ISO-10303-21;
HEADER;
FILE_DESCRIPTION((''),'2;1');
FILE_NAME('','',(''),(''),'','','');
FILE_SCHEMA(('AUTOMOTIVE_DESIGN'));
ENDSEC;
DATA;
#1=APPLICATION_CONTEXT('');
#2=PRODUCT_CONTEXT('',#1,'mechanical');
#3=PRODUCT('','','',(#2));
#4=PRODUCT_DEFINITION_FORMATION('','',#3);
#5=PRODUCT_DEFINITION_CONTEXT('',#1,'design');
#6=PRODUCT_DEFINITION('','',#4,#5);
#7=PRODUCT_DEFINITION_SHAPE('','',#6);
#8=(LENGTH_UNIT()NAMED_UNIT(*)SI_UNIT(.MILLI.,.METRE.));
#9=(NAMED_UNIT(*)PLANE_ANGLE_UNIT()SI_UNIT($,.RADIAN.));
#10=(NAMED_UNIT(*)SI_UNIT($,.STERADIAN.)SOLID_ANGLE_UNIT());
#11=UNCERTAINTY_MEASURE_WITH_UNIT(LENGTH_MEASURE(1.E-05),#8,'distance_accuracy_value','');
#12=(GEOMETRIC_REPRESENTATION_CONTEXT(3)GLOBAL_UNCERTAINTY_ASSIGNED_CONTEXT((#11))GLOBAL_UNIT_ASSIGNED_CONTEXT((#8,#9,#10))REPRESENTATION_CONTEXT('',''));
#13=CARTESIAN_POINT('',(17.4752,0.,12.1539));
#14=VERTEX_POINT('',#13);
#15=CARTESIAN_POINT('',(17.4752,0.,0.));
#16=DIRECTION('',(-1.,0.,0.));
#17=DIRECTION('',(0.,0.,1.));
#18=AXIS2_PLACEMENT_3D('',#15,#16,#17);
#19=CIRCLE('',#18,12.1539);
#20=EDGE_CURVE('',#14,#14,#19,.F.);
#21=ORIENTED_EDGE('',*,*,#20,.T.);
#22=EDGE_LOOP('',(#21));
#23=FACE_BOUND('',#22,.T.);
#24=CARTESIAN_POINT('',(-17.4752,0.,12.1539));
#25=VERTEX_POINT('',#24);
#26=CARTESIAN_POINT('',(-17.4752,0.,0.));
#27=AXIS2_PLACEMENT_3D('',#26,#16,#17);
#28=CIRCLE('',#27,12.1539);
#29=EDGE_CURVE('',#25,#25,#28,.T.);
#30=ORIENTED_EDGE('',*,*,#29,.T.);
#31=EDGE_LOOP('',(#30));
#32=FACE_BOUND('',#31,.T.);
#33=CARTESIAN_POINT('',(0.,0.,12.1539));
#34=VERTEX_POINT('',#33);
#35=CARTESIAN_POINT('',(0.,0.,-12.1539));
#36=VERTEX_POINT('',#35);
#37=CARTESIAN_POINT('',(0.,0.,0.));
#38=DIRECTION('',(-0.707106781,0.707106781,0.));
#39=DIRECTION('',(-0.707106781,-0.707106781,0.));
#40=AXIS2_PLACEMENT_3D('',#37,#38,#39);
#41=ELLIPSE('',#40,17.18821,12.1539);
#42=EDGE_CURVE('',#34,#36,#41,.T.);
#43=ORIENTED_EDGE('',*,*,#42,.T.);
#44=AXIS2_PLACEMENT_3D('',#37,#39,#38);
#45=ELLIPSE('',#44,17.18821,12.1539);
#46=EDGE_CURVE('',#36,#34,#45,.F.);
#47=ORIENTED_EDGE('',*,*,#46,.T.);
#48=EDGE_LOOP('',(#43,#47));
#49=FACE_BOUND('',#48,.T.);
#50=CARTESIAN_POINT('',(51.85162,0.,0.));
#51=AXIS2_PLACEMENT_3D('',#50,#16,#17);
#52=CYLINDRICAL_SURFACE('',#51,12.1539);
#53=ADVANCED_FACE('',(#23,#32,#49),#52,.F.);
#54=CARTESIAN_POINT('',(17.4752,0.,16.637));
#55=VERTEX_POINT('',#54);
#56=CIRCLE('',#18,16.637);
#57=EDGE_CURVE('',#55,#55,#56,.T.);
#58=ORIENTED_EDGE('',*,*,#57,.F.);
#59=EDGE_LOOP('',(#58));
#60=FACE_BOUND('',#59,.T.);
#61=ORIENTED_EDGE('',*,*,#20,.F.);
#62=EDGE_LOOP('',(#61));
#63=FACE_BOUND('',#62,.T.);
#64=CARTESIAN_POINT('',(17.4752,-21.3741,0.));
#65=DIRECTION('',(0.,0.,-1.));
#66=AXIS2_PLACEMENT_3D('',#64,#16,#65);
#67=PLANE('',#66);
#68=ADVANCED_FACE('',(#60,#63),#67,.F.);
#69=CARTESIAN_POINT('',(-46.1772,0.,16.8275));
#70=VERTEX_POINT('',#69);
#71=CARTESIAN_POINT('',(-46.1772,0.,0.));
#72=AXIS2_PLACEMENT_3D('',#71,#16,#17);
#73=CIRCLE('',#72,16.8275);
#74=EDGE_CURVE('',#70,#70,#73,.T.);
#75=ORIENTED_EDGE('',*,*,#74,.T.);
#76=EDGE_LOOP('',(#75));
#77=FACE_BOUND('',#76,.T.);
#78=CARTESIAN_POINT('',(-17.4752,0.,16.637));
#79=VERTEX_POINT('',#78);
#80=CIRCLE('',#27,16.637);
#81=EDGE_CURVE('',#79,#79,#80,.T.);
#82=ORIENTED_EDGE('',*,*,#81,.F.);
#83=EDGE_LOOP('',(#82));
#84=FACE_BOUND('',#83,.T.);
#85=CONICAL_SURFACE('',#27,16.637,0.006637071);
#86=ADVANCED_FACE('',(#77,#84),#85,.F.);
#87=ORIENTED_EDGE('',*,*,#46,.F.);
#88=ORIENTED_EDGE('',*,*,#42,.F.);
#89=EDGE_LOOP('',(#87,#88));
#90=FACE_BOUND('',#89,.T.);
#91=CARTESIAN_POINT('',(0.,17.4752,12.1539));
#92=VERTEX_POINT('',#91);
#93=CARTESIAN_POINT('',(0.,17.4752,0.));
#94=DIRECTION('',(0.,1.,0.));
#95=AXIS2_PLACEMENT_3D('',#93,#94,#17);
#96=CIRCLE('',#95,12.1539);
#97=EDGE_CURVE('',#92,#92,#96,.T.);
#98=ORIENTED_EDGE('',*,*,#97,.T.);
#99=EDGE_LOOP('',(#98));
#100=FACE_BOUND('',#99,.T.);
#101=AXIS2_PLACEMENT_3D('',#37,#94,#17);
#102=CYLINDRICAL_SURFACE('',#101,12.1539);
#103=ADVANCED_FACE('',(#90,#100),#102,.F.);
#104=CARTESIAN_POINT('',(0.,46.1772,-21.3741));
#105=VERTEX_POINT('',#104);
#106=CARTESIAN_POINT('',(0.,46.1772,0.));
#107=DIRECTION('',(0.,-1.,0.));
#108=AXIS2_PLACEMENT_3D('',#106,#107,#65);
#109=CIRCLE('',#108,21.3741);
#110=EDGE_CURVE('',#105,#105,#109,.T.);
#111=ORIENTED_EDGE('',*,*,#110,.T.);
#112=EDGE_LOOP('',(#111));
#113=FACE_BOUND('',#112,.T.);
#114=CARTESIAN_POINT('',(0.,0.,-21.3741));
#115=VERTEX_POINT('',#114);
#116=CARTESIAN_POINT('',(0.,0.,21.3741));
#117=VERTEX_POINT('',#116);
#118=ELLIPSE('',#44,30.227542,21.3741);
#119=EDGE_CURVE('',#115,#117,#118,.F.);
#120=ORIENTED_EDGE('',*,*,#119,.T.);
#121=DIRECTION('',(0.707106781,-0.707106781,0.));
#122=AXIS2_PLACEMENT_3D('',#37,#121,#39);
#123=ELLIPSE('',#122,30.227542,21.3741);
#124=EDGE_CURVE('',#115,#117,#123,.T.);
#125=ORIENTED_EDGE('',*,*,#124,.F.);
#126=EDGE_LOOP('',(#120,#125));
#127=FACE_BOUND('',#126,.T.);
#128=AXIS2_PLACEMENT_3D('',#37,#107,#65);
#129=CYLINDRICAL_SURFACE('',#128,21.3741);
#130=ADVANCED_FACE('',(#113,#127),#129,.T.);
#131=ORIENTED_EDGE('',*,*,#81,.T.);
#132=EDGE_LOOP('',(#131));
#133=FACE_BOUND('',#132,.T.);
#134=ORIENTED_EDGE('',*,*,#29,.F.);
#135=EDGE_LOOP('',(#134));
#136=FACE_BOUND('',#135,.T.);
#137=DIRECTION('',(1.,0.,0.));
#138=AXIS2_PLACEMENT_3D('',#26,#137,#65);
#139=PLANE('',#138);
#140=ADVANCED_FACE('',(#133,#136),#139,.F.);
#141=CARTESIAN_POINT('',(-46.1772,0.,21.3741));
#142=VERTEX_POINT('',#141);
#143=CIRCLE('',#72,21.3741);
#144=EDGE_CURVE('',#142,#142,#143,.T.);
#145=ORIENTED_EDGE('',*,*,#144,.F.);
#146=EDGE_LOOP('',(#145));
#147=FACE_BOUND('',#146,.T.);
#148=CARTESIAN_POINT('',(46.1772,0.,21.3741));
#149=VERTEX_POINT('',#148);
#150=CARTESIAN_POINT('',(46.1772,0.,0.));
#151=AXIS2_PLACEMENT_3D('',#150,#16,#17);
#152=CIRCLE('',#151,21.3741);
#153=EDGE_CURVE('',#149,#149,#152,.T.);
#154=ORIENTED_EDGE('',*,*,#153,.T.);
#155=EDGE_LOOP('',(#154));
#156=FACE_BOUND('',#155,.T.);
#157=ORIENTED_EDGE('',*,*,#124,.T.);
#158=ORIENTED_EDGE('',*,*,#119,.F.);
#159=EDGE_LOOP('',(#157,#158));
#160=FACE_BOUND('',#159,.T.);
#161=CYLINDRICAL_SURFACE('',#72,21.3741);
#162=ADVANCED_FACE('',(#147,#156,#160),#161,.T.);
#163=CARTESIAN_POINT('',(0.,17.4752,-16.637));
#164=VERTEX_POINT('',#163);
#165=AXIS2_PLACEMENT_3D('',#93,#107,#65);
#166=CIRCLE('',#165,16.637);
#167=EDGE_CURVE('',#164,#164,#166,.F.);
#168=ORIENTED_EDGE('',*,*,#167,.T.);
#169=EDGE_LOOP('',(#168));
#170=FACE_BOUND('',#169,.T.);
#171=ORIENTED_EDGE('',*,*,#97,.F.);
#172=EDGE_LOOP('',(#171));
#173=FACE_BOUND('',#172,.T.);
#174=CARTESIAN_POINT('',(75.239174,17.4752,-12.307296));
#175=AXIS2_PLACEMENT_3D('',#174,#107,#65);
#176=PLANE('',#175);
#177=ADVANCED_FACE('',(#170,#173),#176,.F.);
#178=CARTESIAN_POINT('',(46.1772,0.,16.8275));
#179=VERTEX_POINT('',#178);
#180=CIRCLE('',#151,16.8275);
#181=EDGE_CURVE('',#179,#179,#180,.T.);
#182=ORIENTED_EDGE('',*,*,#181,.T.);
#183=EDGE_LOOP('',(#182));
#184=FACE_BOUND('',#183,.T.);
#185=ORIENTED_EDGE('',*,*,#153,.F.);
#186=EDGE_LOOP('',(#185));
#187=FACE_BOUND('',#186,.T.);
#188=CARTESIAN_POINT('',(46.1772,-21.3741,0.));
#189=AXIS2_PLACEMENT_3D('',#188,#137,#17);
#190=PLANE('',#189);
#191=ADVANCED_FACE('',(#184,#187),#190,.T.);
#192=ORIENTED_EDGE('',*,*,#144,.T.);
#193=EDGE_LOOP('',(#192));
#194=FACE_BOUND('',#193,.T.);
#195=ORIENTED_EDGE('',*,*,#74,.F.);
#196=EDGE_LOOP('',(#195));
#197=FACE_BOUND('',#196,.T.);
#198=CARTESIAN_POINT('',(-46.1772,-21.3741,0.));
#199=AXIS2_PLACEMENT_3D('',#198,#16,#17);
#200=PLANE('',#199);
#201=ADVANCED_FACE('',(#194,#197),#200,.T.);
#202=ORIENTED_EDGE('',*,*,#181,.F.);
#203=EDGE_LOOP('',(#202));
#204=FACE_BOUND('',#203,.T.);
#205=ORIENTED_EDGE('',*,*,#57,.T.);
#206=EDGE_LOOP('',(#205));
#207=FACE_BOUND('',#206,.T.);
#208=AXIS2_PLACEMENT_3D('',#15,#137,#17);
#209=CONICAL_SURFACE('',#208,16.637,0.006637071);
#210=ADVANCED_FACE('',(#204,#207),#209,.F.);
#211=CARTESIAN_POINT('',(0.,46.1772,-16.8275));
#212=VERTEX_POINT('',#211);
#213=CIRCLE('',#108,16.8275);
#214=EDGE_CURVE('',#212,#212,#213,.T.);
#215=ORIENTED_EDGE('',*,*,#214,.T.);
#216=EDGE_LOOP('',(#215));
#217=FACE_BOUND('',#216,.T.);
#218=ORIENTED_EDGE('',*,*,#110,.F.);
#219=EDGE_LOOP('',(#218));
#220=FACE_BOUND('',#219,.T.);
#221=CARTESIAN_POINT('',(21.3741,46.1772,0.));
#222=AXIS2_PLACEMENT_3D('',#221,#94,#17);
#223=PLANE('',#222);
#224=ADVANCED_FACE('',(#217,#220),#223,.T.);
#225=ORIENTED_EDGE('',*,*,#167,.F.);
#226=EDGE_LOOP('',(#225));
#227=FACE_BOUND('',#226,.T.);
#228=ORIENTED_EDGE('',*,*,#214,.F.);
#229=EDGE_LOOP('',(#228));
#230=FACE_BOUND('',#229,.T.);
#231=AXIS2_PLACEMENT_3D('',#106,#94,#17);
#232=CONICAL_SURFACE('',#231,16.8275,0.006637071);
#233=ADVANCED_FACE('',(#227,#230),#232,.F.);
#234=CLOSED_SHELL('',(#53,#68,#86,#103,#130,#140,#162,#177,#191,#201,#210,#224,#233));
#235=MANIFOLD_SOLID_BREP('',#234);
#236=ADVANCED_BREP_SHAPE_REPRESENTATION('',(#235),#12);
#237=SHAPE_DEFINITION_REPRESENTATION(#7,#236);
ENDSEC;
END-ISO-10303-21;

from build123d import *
from build123d.topology import SkipClean

# Parameters (mm, degrees)
BOSS_EXTRUDE1_START     = 34.9504
BOSS_EXTRUDE1_DEPTH     = 34.9504
BOSS_EXTRUDE2_DEPTH     = 17.4752001
SKETCH5_R               = 12.1539
CUT_EXTRUDE1_DEPTH      = 34.9504
CUT_EXTRUDE2_REACH      = 66.019
CUT_EXTRUDE2_END_RADIUS = 12.1539
SKETCH6_R               = 12.1539


# Read off the part's stored shape, not the designer's step: Boss-Extrude2
with BuildPart() as part:
    # Sketch1 → Revolve1 (revolve)
    with BuildSketch(Plane.XY, mode=Mode.PRIVATE) as revolve1_sk:
        Polygon((-46.1772, -21.3741), (-17.4752, -21.3741), (-17.4752, -16.637), (-46.1772, -16.8275), align=None)
    revolve(revolve1_sk.sketch.rotate(Axis((-46.1772, 0, 0), (1, 0, 0)), 270), axis=Axis((-46.1772, 0, 0), (1, 0, 0)))


with BuildPart() as body_2:
    # Mirror1: mirrored copy
    add(part.part.mirror(Plane(origin=(0, 0, 0), x_dir=(0, 0, 1), z_dir=(1, 0, 0))))


with BuildPart() as body_3:
    # Sketch2 → Revolve2 (revolve)
    with BuildSketch(Plane.XY, mode=Mode.PRIVATE) as revolve2_sk:
        Polygon((16.8275, 46.1772), (16.637, 17.4752), (21.3741, 17.4752), (21.3741, 46.1772), align=None)
    revolve(revolve2_sk.sketch.rotate(Axis((0, 0, 0), (0, 1, 0)), 90), axis=Axis((0, 0, 0), (0, 1, 0)))


with BuildPart() as part_1:
    with SkipClean():  # the faces are left unmerged after this step: merging them gives an invalid solid
        add(part.part)

        add(body_2.part)  # Boss-Extrude1 merges body 2

        add(body_3.part)  # Boss-Extrude1 merges body 3
        # Sketch3 → Boss-Extrude1 (add)
        with BuildSketch(Plane(origin=(-17.4752, 0, 0), x_dir=(0, 0, -1), z_dir=(1, 0, 0)).offset(BOSS_EXTRUDE1_START)):
            with BuildLine():
                Line((12.307296038, 17.4752), (-12.307296038, 17.4752))
                ThreePointArc((-12.307296038, 17.4752), (0, -21.3741), (12.307296038, 17.4752))
            make_face()
        extrude(amount=-BOSS_EXTRUDE1_DEPTH)

    # Boss-Extrude2 outline → Boss-Extrude2 (add)
    with SkipClean():  # the faces are left unmerged after this step: merging them gives an invalid solid
        with BuildSketch(Plane.XZ.offset(-17.4752)):
            with BuildLine():
                ThreePointArc((-17.4752, -12.307296038), (0, -21.3741), (17.4752, -12.307296038))
                Line((17.4752, -12.307296038), (17.4752, 12.307296038))
                ThreePointArc((17.4752, 12.307296038), (0, 21.3741), (-17.4752, 12.307296038))
                Line((-17.4752, 12.307296038), (-17.4752, -12.307296038))
            make_face()
        extrude(amount=BOSS_EXTRUDE2_DEPTH)

    # Sketch5 → Cut-Extrude1 (cut)
    with SkipClean():  # the faces are left unmerged after this step: merging them gives an invalid solid
        with BuildSketch(Plane.ZY.offset(17.4752)):
            Circle(SKETCH5_R)
        extrude(amount=-CUT_EXTRUDE1_DEPTH, mode=Mode.SUBTRACT)

    # Cut-Extrude2: up to this cylinder (the profile starts outside it)
    with SkipClean():  # the faces are left unmerged after this step: merging them gives an invalid solid
        cut_extrude2_end = Plane(origin=(0, 0, 0), z_dir=(-1, 0, 0)) * Cylinder(CUT_EXTRUDE2_END_RADIUS, 157.3458, mode=Mode.PRIVATE)
        # Sketch6 → Cut-Extrude2 (cut, up to the surface)
        with BuildSketch(Plane(origin=(0, 17.4752, 0), x_dir=(1, 0, 0), z_dir=(0, 1, 0)), mode=Mode.PRIVATE) as cut_extrude2_sk1:
            with Locations(Location((0, 0, 0), (0, 0, 270))):
                Circle(SKETCH6_R)
        cut_extrude2_tool1 = extrude(cut_extrude2_sk1.sketch, amount=-CUT_EXTRUDE2_REACH, mode=Mode.PRIVATE) - cut_extrude2_end
        add(cut_extrude2_tool1.solids().sort_by_distance((0, 17.4752, 0))[0], mode=Mode.SUBTRACT)


solid = part_1.part
